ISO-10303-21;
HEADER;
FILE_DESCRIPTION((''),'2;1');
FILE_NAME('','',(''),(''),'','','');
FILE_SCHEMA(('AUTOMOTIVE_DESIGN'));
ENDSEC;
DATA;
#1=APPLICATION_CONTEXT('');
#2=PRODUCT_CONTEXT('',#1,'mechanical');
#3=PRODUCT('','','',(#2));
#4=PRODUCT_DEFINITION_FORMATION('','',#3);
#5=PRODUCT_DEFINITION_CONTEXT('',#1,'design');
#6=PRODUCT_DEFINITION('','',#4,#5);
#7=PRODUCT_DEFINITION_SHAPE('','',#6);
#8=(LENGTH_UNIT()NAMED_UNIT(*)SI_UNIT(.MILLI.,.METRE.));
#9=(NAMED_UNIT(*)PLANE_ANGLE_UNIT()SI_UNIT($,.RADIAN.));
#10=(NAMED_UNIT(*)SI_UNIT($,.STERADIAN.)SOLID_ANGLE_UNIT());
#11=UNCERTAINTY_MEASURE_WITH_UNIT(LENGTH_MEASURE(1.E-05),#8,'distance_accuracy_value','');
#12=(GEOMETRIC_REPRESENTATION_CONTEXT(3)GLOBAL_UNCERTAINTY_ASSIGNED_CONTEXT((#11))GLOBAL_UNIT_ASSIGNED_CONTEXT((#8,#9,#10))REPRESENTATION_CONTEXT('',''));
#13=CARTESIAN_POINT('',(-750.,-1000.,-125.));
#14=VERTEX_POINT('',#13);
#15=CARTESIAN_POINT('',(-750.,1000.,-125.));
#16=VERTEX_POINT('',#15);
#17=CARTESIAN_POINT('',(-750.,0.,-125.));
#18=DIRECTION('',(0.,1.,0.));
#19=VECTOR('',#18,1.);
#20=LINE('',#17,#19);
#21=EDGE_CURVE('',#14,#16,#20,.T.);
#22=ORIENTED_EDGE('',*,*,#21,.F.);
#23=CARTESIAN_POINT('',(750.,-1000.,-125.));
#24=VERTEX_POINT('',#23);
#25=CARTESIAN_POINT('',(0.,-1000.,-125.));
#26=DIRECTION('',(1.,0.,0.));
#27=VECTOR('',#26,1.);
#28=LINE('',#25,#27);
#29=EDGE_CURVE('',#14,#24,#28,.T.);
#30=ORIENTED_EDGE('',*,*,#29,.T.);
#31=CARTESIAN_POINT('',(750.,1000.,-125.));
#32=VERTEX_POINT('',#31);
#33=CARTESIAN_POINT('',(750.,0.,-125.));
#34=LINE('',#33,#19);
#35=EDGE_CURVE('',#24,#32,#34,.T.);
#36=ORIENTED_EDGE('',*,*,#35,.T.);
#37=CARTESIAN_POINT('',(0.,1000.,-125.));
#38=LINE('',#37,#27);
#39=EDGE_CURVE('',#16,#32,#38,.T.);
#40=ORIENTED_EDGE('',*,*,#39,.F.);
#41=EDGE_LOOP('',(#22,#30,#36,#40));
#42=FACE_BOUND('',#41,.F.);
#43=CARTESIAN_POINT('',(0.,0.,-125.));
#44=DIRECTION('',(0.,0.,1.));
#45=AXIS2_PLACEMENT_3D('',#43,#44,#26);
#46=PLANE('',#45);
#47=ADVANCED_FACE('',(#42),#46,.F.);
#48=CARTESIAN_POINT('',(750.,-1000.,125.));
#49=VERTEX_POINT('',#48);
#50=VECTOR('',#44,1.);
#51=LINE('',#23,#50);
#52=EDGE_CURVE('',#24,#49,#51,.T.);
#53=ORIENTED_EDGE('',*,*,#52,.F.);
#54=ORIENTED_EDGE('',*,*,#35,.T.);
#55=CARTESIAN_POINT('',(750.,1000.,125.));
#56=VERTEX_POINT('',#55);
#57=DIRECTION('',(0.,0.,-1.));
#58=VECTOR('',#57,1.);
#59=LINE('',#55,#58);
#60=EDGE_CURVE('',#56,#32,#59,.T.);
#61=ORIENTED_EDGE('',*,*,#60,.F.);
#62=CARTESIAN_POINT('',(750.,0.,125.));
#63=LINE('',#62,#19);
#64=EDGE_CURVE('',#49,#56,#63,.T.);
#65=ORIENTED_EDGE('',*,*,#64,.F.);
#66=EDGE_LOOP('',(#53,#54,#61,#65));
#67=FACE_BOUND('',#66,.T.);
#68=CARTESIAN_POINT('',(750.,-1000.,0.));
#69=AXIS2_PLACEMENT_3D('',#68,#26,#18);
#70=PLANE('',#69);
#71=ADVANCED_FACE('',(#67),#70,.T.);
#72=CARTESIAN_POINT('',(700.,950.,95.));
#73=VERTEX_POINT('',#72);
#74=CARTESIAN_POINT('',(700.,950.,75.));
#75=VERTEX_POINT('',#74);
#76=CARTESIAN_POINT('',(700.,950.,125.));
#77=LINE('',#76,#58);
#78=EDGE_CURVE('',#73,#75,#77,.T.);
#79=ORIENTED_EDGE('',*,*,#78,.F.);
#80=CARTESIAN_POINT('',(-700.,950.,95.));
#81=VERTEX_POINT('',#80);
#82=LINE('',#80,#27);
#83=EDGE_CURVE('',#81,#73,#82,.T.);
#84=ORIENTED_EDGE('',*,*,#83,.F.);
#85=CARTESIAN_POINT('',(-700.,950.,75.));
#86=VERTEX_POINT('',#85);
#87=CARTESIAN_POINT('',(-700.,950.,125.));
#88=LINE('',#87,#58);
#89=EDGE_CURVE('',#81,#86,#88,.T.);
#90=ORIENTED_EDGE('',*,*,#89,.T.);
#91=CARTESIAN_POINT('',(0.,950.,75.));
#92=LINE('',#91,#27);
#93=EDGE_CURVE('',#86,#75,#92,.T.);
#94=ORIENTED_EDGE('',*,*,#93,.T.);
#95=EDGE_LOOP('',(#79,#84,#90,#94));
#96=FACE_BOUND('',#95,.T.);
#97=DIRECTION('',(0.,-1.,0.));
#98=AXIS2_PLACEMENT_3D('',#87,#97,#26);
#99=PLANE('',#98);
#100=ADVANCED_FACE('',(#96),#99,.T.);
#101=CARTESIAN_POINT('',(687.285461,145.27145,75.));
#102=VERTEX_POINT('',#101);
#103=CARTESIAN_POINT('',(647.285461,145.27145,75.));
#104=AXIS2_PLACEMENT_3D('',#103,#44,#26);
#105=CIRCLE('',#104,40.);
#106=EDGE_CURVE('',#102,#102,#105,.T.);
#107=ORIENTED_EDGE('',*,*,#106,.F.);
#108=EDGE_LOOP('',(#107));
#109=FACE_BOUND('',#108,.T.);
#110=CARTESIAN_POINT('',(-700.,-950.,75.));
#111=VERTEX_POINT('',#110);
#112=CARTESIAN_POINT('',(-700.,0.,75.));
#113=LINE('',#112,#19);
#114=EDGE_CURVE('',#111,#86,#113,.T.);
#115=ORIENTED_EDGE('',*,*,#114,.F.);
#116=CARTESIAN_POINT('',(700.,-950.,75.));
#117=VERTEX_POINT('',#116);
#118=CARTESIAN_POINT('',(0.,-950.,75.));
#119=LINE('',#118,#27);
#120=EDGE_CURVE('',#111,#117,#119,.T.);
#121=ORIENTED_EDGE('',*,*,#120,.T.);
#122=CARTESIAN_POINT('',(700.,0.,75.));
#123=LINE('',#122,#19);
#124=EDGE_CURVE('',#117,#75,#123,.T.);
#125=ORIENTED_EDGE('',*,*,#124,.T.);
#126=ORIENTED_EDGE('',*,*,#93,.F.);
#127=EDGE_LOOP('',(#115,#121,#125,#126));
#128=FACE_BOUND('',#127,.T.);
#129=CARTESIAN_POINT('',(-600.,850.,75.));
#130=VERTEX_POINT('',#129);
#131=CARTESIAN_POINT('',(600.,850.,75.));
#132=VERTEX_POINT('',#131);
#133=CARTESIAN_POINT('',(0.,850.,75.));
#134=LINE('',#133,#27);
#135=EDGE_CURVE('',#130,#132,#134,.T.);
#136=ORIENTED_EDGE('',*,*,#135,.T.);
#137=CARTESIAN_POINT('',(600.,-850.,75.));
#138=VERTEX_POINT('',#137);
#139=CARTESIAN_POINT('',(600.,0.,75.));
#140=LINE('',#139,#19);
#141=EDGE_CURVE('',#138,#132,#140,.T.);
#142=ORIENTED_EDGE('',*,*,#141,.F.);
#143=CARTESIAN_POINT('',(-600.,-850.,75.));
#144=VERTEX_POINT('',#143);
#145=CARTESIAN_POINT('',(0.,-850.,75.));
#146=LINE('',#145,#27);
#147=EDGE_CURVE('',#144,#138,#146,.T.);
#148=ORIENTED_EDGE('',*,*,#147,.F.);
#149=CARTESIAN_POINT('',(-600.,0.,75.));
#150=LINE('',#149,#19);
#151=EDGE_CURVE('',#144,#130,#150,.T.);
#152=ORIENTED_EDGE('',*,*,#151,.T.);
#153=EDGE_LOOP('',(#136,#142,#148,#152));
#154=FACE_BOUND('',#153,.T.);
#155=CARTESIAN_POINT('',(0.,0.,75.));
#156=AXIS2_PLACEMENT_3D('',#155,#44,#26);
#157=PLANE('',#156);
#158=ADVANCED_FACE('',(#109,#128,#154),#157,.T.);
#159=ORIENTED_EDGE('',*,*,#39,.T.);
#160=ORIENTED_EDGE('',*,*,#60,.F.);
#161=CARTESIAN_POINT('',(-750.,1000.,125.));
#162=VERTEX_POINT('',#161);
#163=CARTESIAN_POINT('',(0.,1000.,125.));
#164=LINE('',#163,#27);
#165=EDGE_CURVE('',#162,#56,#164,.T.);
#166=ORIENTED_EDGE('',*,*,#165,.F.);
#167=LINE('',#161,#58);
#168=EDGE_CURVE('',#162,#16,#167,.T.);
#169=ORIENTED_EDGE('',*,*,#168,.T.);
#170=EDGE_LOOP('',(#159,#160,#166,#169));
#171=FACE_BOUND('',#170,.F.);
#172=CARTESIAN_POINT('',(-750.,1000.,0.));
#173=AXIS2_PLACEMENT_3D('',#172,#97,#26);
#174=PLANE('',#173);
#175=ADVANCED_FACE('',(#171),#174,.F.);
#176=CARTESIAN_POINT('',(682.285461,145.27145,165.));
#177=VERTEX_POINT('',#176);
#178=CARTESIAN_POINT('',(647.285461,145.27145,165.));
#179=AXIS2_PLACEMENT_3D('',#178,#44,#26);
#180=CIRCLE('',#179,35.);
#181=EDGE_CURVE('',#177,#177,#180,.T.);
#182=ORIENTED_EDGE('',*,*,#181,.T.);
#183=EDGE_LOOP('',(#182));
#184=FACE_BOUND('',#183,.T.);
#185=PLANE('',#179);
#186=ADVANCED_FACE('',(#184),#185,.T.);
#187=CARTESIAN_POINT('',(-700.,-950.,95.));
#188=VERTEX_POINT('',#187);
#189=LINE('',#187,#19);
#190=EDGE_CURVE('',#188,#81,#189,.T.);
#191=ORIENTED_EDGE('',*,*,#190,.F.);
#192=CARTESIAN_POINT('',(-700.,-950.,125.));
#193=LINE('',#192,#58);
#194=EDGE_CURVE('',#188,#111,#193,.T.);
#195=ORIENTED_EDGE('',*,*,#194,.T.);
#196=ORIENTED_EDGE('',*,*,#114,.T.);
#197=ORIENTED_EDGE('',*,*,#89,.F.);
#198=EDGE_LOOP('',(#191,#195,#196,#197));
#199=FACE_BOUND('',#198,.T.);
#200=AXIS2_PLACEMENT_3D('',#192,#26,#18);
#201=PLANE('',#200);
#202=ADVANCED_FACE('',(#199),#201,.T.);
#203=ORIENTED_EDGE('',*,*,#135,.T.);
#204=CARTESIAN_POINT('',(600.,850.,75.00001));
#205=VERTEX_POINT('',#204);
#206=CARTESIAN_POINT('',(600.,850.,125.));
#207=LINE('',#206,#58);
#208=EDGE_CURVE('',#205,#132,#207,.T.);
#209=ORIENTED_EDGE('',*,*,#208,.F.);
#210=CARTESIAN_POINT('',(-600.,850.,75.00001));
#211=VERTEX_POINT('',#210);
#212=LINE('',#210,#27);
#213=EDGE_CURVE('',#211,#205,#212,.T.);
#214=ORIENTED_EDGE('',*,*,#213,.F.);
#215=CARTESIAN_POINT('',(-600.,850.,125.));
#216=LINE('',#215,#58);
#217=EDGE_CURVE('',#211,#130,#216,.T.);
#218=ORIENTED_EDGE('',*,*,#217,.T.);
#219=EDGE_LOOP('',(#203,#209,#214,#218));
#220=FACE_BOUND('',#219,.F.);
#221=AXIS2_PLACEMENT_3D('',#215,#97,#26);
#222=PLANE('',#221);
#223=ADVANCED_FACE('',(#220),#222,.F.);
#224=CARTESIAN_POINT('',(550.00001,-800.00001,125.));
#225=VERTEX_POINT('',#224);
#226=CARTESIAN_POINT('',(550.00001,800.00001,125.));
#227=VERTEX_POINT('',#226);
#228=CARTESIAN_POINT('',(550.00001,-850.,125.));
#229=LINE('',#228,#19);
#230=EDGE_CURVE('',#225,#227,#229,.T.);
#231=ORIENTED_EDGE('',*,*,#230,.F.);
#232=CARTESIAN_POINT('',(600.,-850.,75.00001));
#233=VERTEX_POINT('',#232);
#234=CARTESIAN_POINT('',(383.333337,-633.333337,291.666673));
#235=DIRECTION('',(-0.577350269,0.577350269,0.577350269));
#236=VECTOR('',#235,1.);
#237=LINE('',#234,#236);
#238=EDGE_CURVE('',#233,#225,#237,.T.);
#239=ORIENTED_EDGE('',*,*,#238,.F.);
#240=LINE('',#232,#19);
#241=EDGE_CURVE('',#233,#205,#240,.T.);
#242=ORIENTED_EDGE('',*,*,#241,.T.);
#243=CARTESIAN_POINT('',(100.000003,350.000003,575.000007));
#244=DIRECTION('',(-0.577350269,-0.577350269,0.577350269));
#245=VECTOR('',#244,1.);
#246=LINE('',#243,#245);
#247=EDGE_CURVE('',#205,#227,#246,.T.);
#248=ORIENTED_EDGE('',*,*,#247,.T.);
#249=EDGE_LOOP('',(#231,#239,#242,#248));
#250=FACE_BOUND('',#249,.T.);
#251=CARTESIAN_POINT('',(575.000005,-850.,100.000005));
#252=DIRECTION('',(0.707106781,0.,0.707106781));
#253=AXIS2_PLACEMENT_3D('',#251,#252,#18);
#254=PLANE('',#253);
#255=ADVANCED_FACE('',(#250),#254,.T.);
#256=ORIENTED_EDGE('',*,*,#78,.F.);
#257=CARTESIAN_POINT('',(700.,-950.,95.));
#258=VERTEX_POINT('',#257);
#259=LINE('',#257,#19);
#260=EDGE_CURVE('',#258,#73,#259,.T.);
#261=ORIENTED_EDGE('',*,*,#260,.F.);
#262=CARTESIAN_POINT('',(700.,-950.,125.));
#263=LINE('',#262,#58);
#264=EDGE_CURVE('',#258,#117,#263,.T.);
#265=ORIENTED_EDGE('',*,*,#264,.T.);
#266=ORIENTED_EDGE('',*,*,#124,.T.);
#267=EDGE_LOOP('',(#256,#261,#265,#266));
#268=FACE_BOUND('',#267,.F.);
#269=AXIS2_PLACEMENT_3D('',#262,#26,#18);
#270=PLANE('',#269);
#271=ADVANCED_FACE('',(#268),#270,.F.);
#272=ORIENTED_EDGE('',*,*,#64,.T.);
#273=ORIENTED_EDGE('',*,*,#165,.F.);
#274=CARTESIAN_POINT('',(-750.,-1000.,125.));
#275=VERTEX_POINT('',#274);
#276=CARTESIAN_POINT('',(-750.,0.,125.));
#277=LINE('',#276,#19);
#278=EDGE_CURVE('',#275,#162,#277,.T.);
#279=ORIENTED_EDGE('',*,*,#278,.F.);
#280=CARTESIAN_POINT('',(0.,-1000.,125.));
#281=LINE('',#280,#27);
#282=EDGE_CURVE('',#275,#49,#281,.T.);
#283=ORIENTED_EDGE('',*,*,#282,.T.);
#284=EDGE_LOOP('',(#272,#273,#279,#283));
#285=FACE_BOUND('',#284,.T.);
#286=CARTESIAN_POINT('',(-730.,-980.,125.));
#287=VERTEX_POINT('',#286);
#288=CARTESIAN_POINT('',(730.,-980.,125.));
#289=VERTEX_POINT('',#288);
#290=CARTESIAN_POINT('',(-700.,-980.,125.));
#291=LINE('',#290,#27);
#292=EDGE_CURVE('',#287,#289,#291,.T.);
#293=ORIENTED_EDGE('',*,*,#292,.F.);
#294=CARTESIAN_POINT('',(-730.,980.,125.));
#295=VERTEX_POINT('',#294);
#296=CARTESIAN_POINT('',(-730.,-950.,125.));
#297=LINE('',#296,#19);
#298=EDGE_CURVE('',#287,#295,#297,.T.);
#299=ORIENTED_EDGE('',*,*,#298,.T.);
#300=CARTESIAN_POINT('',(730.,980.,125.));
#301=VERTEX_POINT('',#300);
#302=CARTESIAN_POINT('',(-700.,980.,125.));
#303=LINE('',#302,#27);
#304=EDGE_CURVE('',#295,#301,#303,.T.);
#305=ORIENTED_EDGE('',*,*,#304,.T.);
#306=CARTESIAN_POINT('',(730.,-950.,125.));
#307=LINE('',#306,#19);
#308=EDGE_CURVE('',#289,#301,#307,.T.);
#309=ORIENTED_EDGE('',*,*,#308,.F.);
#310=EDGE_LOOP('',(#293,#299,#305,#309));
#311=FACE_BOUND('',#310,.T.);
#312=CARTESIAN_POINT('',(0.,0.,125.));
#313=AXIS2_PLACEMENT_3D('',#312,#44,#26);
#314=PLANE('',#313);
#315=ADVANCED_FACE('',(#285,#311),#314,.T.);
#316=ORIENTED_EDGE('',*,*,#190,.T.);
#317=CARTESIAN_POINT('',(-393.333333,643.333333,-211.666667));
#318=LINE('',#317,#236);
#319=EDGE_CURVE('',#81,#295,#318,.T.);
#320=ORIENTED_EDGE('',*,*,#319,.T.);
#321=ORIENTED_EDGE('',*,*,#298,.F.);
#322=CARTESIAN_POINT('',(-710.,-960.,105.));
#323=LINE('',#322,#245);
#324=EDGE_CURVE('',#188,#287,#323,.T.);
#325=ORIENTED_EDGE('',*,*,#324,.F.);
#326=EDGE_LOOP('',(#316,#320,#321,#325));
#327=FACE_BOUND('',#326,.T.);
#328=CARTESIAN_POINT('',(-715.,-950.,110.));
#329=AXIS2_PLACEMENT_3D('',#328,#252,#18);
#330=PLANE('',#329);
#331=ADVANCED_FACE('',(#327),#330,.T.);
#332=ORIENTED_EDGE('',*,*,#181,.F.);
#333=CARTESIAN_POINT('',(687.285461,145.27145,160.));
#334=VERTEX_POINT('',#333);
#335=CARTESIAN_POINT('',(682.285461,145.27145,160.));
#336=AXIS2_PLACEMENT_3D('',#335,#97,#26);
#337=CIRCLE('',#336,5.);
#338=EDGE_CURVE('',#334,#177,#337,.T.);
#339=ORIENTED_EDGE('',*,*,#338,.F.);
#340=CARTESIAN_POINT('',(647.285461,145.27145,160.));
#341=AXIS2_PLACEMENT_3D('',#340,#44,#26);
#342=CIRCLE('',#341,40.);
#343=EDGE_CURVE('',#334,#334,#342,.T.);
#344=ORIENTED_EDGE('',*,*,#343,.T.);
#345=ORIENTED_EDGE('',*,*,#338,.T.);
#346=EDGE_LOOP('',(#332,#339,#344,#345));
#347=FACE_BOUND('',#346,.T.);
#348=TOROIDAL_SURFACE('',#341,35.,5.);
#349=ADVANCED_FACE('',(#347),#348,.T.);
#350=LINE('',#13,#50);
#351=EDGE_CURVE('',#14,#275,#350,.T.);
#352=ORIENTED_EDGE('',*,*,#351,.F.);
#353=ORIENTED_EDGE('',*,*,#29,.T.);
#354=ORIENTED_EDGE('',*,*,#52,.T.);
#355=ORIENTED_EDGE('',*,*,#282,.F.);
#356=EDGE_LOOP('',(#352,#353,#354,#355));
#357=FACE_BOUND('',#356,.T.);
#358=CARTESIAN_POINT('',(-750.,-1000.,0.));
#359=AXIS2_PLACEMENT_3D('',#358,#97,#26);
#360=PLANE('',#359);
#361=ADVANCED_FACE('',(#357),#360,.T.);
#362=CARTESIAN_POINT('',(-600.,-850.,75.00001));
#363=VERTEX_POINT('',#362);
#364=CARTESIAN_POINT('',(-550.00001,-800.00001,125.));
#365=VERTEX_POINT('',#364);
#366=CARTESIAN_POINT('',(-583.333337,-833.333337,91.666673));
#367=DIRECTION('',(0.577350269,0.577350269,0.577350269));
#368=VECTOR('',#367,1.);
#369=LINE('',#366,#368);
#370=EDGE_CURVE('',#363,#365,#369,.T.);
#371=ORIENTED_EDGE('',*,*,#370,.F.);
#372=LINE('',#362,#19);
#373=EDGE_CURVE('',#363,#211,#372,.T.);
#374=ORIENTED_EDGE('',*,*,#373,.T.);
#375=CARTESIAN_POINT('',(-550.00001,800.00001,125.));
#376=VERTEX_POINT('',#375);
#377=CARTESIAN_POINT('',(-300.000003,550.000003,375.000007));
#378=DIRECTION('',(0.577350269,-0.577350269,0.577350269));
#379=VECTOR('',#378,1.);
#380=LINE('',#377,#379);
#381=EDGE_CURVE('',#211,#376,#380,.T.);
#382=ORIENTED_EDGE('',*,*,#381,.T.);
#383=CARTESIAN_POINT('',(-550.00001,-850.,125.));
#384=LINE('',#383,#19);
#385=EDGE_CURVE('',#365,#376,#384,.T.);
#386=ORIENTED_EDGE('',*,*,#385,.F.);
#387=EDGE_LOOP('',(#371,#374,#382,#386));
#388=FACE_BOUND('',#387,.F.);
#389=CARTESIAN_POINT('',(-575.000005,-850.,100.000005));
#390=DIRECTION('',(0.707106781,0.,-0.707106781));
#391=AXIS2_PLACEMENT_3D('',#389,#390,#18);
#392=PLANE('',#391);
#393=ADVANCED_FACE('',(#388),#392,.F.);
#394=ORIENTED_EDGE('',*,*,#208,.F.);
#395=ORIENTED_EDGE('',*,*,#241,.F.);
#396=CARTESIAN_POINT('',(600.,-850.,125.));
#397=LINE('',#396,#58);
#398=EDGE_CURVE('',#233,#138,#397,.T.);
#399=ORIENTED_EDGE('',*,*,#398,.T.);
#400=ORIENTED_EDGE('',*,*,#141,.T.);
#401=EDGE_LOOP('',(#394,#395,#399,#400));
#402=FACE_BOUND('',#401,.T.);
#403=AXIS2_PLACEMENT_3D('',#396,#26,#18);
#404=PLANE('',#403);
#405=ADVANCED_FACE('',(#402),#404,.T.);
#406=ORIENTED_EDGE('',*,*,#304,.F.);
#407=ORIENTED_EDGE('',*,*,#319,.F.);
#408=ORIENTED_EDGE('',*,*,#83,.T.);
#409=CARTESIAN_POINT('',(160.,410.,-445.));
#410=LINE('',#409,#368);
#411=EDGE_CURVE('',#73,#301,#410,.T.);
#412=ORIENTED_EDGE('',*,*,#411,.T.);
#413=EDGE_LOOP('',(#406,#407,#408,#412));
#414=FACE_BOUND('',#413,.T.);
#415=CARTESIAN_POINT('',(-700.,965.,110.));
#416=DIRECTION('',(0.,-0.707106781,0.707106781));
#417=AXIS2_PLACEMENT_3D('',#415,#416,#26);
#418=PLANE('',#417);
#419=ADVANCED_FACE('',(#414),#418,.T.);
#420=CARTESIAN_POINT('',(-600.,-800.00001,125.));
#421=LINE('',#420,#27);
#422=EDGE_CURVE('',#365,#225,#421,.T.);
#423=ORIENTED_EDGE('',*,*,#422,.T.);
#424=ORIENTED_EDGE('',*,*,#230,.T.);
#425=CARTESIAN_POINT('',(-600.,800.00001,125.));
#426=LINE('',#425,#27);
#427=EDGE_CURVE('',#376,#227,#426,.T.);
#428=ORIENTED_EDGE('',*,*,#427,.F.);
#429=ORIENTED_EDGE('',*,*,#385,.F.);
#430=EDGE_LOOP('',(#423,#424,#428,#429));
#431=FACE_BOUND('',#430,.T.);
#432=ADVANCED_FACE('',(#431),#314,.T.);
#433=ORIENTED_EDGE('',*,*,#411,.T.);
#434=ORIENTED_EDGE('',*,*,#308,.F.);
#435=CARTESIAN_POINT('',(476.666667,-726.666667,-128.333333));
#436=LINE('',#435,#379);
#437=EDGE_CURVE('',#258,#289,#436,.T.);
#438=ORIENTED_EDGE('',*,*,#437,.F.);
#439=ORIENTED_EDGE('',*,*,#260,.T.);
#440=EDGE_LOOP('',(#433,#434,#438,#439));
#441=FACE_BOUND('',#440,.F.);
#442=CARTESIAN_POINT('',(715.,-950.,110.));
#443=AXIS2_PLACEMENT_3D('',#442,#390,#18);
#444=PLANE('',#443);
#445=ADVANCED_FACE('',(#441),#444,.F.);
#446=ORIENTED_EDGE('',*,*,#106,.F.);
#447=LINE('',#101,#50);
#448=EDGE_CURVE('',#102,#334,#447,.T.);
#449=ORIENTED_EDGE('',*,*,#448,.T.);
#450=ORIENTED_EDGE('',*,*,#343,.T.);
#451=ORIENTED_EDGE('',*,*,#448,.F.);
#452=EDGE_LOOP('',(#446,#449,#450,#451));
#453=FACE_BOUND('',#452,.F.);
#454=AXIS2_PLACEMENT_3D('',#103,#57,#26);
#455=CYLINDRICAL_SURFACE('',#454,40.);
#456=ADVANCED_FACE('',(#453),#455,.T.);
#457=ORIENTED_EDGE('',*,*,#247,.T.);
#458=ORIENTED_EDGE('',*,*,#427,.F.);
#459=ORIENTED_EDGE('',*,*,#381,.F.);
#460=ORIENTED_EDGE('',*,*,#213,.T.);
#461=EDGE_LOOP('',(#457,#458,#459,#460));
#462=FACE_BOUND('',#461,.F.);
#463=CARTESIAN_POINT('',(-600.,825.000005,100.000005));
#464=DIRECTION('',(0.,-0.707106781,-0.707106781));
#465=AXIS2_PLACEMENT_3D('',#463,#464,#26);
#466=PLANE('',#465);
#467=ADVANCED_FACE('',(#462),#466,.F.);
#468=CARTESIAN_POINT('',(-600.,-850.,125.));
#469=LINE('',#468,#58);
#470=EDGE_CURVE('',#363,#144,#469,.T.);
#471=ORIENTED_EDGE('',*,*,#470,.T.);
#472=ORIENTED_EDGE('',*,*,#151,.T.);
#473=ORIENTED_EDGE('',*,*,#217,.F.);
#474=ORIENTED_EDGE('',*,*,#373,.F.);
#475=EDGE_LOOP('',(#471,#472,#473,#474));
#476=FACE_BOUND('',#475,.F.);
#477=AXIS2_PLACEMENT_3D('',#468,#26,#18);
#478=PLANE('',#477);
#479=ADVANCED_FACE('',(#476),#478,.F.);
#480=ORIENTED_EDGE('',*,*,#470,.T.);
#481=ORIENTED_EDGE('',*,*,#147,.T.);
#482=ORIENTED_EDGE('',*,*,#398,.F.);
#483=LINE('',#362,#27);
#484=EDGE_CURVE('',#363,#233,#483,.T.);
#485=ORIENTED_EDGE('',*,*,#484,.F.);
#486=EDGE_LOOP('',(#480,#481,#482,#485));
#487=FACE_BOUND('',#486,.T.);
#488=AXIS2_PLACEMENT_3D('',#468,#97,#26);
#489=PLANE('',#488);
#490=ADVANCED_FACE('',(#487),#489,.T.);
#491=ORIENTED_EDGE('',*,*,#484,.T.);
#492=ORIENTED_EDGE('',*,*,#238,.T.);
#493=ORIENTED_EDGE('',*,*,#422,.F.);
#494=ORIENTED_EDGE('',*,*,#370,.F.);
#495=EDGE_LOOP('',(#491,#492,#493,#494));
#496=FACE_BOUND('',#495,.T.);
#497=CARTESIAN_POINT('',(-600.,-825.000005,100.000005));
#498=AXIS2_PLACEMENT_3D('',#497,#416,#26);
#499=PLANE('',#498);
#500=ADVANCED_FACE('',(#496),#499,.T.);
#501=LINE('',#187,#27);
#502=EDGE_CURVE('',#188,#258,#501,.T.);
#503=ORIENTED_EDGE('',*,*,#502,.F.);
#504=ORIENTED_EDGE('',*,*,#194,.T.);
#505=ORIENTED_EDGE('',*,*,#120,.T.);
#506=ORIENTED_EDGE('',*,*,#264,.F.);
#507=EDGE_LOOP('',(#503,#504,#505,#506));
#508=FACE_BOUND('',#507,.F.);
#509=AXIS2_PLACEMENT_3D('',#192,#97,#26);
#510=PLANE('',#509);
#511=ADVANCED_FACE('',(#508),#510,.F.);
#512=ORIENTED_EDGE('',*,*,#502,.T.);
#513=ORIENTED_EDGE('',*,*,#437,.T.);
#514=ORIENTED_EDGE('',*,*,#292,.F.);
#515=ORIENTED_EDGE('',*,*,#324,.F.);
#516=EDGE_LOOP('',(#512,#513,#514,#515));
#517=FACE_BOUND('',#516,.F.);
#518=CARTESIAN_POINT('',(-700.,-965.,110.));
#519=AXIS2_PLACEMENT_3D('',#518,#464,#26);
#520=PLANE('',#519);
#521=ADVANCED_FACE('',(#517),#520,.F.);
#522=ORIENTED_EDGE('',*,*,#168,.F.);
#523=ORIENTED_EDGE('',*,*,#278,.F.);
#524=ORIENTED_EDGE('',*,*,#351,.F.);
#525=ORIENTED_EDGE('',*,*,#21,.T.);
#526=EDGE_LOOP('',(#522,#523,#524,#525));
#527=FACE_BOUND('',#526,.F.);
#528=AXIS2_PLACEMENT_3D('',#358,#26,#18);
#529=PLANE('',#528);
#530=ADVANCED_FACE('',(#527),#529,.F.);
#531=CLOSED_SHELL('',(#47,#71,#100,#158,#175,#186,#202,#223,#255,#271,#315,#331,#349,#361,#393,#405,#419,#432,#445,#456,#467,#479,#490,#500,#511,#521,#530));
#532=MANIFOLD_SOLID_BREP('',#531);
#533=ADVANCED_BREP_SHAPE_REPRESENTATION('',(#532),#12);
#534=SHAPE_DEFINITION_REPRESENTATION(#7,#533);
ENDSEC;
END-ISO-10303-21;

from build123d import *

# Parameters (mm, degrees)
F0_W     = 1500
F0_H     = 2000
F0_W_2   = 1400
F0_H_2   = 1900
F0_W_3   = 1200
F0_H_3   = 1700
F1_DEPTH = 125
F2_W     = 1400
F2_H     = 1900
F2_W_2   = 1200
F2_H_2   = 1700
F3_DEPTH = 50
F4_SIZE  = 49.99999
F5_SIZE  = 30
F6_R     = 40
F7_DEPTH = 90
F8_R     = 5


# Not quite as in the source:
# - a fillet or chamfer is up to 0.001 mm smaller than in the source, because OpenCascade refuses the exact size


with BuildPart() as f1:
    # F0 (on Top) → F1 (new body, symmetric)
    with BuildSketch(Plane.XY):
        Rectangle(F0_W, F0_H)
        Rectangle(F0_W_2, F0_H_2, mode=Mode.SUBTRACT)
        Rectangle(F0_W_2, F0_H_2)
        Rectangle(F0_W_3, F0_H_3, mode=Mode.SUBTRACT)
        Rectangle(F0_W_3, F0_H_3)
    extrude(amount=F1_DEPTH, both=True)

    # F2 (on face) → F3 (cut)
    with BuildSketch(Plane.XY.offset(125)):
        Rectangle(F2_W, F2_H)
        Rectangle(F2_W_2, F2_H_2, mode=Mode.SUBTRACT)
    extrude(amount=-F3_DEPTH, mode=Mode.SUBTRACT)

    # F4 (size 50 in the source; OpenCascade refuses exactly that, so slightly less here)
    f4_edges = [f1.edges().sort_by_distance(p)[0] for p in [
        (-600, 0, 125),
        (0, 850, 125),
        (600, 0, 125),
        (0, -850, 125),
    ]]
    chamfer(f4_edges, length=F4_SIZE)

    # F5
    f5_edges = [f1.edges().sort_by_distance(p)[0] for p in [
        (-700, 0, 125),
        (0, 950, 125),
        (700, 0, 125),
        (0, -950, 125),
    ]]
    chamfer(f5_edges, length=F5_SIZE)

    # F6 (on face) → F7 (join)
    with BuildSketch(Plane.XY.offset(75)):
        with Locations((647.2854614258, 145.2714502811)):
            Circle(F6_R)
    extrude(amount=F7_DEPTH)

    # F8
    f8_edges = [f1.edges().sort_by_distance(p)[0] for p in [
        (607.285461, 145.27145, 165),
    ]]
    fillet(f8_edges, radius=F8_R)


solid = f1.part
